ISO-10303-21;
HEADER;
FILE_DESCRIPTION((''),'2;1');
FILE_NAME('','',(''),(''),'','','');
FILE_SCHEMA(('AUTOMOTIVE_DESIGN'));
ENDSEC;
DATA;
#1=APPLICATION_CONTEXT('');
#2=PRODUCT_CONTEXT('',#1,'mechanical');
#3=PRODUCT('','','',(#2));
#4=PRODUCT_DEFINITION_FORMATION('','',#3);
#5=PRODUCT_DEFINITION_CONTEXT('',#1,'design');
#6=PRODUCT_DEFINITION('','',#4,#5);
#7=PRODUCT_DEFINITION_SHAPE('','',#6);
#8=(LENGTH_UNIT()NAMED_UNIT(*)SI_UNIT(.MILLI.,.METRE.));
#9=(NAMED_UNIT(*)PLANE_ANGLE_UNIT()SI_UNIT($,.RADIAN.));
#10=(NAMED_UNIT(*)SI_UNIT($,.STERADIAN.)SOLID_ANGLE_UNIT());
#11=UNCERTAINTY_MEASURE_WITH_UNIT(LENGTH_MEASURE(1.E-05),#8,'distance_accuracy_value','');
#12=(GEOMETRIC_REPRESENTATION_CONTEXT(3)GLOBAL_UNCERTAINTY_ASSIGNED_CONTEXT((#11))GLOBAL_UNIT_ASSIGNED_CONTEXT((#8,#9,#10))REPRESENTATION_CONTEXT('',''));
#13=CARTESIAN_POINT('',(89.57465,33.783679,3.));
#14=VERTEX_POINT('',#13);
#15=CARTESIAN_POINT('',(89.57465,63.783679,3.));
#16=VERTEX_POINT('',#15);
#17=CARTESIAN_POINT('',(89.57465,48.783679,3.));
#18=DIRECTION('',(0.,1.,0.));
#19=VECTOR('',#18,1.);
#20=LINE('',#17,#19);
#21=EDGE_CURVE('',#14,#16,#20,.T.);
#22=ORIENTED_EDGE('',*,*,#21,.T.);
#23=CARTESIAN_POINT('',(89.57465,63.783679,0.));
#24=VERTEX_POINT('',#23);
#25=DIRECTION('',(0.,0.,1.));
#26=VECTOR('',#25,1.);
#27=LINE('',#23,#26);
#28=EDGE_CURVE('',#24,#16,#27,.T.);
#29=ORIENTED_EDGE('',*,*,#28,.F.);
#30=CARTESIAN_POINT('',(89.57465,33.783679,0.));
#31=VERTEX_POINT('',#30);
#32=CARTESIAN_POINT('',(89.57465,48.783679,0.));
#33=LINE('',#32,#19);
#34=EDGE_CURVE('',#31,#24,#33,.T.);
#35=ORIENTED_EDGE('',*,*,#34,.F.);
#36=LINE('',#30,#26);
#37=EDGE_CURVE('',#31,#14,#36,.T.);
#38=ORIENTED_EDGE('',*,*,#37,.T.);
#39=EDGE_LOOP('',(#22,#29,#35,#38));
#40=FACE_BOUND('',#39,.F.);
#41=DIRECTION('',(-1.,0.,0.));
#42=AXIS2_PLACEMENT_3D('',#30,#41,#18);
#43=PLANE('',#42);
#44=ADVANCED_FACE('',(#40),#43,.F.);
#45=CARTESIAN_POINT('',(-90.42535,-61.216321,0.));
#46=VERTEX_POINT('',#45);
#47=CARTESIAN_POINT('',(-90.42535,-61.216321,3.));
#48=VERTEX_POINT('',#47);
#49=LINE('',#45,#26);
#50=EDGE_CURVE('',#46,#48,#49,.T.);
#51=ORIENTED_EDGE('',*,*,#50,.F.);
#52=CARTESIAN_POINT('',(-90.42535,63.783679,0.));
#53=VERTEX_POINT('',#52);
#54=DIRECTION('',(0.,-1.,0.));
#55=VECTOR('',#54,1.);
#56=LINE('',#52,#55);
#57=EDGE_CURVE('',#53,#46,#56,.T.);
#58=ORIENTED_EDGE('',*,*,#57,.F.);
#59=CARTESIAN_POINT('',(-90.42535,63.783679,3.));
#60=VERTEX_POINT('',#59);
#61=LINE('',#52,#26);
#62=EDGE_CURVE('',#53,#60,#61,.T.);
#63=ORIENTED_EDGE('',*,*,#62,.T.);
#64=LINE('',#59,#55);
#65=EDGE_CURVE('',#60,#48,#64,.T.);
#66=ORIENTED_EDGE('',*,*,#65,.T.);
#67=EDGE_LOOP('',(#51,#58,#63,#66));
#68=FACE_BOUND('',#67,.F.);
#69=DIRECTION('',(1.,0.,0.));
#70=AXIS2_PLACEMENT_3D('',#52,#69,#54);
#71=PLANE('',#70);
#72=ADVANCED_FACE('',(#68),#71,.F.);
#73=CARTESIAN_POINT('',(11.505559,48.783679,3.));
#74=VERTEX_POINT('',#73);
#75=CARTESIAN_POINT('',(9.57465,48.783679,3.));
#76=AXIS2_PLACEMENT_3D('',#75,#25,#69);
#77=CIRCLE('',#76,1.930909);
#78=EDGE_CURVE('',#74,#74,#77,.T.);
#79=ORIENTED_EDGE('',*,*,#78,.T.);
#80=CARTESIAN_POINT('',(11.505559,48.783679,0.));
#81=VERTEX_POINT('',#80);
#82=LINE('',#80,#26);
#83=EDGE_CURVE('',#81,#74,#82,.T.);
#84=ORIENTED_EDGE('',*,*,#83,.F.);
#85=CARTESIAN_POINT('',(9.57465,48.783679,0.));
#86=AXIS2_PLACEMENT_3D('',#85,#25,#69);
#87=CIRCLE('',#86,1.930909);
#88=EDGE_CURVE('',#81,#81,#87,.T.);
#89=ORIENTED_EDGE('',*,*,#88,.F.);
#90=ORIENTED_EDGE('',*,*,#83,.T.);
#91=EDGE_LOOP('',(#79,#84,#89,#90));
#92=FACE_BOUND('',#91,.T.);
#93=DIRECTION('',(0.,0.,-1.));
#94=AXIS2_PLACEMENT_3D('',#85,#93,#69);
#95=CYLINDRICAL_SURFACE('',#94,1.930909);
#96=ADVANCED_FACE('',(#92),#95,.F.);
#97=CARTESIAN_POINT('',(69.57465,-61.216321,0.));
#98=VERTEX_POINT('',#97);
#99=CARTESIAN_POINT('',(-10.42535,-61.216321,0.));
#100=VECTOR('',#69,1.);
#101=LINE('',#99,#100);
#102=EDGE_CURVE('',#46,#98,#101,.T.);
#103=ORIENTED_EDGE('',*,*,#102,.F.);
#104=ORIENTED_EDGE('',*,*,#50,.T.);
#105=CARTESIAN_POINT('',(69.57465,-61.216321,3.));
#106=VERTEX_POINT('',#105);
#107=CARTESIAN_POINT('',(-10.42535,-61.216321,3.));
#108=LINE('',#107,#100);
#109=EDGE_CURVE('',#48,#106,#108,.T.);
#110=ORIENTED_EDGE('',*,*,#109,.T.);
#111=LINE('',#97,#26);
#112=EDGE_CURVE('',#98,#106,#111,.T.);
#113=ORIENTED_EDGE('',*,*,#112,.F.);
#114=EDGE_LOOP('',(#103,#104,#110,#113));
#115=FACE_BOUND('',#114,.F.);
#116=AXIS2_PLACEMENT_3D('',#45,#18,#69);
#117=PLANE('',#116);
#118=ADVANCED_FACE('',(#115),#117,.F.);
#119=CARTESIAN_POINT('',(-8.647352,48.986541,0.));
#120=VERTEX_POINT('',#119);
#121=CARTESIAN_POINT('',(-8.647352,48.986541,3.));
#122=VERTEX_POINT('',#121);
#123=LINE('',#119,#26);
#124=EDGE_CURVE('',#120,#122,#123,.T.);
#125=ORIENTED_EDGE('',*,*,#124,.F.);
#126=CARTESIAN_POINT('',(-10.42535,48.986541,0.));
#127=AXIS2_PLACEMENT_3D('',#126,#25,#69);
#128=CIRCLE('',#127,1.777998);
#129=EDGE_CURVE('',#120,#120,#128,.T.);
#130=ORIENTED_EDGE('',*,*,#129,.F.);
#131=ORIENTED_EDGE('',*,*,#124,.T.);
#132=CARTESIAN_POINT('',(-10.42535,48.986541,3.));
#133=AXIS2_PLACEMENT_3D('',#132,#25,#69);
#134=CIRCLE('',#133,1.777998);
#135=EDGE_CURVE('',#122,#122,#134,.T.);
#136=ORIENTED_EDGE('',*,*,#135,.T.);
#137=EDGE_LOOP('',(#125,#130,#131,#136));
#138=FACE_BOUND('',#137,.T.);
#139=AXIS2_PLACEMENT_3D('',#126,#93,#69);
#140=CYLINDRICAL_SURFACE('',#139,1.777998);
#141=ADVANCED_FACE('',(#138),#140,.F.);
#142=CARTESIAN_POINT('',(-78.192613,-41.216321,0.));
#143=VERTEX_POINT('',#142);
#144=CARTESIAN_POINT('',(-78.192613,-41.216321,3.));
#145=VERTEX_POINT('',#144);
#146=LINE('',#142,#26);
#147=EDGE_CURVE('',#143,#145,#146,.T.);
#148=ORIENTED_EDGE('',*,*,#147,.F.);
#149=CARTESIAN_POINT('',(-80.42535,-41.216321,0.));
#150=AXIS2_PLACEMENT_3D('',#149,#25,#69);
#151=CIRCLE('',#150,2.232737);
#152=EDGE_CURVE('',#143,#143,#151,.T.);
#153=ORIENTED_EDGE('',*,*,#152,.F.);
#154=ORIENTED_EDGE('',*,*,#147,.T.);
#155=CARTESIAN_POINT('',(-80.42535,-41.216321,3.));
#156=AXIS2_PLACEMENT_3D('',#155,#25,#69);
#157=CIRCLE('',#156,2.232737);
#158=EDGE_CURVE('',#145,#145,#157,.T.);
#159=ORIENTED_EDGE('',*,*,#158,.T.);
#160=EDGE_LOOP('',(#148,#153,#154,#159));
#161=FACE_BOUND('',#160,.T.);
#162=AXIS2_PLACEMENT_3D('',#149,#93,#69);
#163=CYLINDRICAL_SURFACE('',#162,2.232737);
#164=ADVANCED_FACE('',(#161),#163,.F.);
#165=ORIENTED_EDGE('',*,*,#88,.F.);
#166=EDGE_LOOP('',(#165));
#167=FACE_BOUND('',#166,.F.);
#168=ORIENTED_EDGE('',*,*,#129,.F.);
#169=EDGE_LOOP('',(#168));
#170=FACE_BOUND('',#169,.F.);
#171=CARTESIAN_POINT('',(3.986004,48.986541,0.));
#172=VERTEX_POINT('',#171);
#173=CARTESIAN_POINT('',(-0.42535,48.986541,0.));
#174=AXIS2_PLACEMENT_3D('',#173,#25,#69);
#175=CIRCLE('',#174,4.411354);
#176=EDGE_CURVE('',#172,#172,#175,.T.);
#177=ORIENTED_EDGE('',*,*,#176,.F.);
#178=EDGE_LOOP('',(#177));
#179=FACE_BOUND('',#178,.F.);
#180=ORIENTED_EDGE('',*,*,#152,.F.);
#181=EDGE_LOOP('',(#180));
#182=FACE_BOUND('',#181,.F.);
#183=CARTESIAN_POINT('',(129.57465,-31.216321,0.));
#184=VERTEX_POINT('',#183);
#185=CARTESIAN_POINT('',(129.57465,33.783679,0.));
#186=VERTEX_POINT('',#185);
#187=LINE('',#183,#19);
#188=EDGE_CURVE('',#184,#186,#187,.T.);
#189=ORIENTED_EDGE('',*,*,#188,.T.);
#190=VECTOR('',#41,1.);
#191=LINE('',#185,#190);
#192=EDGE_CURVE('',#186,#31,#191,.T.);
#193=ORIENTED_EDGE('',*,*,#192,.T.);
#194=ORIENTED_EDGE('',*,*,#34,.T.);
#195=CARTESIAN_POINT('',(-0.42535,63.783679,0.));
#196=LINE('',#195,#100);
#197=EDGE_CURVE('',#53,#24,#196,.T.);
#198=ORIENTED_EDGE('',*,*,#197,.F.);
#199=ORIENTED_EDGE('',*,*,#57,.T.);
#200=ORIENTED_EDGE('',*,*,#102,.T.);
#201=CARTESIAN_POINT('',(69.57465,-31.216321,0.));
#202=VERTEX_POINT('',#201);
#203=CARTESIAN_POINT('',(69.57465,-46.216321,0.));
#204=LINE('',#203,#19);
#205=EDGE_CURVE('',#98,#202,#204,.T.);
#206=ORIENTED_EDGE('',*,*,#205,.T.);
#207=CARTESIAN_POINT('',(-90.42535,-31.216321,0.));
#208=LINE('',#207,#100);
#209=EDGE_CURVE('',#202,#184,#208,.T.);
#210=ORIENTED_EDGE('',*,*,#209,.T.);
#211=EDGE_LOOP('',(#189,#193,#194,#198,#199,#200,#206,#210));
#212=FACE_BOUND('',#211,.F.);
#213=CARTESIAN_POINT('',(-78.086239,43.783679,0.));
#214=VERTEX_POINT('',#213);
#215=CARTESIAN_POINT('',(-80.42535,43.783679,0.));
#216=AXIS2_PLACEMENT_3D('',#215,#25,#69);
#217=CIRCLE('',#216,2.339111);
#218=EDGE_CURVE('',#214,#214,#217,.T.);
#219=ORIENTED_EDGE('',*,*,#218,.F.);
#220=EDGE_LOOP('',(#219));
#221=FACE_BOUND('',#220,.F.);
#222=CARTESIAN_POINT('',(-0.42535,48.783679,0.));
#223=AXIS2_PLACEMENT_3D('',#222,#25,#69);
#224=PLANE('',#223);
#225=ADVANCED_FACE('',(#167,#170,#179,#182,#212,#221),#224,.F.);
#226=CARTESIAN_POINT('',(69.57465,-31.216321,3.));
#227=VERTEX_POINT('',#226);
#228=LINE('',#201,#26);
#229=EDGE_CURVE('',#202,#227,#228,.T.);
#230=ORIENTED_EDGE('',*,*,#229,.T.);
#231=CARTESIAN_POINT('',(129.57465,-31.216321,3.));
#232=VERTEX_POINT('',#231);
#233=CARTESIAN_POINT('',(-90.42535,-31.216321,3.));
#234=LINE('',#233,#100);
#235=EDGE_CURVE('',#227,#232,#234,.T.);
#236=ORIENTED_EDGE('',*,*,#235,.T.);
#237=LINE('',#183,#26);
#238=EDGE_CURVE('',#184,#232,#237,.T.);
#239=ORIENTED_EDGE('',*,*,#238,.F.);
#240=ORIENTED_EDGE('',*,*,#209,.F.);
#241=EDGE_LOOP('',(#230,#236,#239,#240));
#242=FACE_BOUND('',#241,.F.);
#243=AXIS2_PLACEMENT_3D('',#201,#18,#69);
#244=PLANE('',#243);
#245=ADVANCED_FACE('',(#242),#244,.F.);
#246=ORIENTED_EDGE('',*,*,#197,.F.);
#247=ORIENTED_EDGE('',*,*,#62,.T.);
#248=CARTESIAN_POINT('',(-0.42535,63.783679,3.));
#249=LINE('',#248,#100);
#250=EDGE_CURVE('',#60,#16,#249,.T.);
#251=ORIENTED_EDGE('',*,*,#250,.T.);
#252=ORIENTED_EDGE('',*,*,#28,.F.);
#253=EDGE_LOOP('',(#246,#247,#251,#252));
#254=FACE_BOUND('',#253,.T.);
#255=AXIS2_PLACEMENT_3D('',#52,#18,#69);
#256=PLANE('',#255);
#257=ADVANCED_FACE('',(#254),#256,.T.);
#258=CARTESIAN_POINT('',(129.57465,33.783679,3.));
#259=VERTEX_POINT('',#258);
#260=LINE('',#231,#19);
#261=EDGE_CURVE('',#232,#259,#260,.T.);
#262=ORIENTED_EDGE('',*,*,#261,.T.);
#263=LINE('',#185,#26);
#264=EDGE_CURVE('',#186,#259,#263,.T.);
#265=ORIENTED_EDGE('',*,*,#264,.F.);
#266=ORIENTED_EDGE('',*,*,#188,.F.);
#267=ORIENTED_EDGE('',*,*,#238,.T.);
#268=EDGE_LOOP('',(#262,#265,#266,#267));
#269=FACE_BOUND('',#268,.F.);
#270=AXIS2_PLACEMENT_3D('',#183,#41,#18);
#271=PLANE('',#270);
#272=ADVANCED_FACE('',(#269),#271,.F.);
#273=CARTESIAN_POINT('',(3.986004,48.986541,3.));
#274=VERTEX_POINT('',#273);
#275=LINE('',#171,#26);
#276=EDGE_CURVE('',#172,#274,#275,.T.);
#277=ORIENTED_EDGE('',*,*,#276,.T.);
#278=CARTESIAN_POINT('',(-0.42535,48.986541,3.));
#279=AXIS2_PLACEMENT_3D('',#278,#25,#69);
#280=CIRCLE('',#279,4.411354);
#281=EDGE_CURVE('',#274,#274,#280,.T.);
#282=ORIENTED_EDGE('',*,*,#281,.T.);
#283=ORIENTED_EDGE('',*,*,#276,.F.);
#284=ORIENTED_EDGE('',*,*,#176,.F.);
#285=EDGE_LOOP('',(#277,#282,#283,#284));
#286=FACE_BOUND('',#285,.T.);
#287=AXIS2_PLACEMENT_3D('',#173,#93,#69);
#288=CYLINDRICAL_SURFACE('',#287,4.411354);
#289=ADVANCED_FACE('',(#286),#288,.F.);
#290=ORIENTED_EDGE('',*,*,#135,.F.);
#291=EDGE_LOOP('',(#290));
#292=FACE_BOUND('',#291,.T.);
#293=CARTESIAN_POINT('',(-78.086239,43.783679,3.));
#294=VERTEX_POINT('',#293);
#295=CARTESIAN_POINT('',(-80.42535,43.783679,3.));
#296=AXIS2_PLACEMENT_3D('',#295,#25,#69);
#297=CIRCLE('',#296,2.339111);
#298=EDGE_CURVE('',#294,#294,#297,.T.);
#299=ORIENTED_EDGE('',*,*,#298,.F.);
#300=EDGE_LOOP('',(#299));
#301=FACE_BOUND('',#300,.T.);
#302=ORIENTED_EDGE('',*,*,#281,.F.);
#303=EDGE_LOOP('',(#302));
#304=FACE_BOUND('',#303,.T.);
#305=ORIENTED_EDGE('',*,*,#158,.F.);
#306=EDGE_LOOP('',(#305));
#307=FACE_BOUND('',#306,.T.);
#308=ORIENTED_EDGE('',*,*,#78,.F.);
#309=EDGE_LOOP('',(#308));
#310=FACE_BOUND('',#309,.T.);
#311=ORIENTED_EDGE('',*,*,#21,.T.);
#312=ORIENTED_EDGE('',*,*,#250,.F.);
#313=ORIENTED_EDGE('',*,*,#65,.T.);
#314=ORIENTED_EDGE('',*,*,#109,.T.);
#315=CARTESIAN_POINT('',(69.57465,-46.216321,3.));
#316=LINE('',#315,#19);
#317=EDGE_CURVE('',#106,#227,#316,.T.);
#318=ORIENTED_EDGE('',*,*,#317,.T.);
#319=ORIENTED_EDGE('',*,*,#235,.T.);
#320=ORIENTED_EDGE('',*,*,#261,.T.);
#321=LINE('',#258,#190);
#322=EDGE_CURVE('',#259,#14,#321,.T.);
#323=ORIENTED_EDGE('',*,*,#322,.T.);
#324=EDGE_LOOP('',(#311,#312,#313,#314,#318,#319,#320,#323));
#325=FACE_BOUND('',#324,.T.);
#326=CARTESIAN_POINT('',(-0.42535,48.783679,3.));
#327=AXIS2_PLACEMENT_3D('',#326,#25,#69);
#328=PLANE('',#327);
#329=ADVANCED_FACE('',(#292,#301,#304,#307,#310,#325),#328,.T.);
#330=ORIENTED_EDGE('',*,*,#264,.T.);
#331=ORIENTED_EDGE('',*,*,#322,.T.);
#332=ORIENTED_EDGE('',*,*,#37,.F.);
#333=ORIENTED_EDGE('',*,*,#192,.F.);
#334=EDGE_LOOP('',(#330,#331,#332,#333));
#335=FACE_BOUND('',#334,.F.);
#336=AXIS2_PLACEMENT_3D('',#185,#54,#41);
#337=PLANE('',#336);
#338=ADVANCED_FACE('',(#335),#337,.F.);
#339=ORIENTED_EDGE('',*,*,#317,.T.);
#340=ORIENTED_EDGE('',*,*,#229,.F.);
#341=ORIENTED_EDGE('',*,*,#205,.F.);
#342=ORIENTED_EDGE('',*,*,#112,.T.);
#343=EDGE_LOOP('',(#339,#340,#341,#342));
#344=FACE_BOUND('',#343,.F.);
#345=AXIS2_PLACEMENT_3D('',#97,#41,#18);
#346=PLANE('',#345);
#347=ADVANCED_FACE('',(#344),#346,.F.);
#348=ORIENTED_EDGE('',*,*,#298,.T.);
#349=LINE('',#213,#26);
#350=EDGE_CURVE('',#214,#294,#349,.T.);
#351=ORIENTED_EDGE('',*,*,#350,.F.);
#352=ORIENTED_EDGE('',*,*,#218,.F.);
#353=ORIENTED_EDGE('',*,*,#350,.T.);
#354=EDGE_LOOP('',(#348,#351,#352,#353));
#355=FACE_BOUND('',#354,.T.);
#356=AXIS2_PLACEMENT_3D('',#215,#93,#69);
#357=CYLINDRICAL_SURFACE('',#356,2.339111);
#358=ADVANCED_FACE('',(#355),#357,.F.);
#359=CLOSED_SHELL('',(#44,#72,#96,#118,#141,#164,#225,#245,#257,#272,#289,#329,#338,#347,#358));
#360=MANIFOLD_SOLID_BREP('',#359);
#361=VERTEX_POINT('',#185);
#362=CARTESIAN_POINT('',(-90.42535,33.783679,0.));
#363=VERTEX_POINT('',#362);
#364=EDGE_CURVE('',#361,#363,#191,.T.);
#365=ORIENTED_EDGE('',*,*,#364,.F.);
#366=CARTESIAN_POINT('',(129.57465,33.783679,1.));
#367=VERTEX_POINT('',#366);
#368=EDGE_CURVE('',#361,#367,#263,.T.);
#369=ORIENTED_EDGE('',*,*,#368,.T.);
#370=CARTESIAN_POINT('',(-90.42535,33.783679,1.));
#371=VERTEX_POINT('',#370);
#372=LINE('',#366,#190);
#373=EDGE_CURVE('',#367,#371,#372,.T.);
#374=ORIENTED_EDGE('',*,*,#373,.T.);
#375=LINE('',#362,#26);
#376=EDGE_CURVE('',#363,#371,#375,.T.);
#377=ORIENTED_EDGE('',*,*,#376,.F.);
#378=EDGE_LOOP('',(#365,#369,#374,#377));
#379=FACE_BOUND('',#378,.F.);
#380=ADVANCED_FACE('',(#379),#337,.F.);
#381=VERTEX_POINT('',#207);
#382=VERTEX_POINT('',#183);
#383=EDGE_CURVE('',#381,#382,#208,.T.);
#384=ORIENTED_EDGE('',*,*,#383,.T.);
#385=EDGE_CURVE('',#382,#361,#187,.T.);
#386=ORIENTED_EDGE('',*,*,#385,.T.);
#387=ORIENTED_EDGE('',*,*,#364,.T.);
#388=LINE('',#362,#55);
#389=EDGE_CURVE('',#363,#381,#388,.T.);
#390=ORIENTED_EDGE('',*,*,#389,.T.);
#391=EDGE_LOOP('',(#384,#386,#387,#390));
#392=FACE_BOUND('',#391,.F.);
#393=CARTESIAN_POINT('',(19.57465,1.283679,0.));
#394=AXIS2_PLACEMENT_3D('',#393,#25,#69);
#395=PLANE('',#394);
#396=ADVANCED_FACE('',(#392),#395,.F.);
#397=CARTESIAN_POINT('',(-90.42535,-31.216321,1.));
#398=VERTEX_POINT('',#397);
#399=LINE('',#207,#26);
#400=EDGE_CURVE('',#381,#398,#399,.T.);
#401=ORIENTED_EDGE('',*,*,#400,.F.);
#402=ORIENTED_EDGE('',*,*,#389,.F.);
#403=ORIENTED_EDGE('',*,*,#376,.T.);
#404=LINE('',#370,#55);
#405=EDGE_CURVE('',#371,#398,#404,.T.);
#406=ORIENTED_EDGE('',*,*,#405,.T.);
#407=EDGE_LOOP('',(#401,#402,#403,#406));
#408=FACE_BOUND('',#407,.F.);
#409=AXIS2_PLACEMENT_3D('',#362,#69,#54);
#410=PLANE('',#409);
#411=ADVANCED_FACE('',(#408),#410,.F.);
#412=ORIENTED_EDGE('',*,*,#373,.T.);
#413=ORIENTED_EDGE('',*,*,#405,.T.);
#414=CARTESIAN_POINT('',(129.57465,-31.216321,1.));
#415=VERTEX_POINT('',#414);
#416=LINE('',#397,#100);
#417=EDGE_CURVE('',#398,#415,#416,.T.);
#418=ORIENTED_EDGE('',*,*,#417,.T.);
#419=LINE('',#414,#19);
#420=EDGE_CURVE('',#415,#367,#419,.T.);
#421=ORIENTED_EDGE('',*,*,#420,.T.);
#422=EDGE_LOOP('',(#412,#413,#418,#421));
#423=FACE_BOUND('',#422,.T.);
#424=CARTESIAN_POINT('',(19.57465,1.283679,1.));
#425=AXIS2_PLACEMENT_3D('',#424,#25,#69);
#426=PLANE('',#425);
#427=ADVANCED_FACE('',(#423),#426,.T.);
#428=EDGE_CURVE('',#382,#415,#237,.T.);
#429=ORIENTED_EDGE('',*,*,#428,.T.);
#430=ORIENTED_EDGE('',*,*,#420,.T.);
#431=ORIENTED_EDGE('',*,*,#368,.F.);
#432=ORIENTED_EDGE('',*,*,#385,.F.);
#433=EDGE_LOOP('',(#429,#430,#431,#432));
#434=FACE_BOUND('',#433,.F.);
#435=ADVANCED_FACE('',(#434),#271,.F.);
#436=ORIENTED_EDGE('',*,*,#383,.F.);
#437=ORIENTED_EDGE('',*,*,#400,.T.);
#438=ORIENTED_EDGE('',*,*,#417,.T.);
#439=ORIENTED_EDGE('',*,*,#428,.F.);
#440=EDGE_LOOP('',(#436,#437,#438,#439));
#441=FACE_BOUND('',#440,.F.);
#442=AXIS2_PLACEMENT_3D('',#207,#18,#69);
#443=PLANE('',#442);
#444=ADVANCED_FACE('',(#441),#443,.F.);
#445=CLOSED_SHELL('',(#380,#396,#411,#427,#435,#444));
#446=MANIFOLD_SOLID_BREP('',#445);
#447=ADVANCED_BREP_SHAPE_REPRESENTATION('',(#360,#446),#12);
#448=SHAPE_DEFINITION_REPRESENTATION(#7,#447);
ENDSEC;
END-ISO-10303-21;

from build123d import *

# Parameters (mm, degrees)
F0_W     = 180
F0_H     = 30
F0_R     = 2.3391107882
F0_R_2   = 1.7779977582
F0_R_3   = 4.4113535935
F0_R_4   = 1.9309092274
F0_W_2   = 160
F0_R_5   = 2.2327370736
F1_DEPTH = 3
F2_DEPTH = 1


# Not quite as in the source:
# - a feature names something its author has since deleted; it is built from what else it names


with BuildPart() as f1:
    # F0 (on Top) → F1 (new body)
    with BuildSketch(Plane.XY):
        with Locations((-0.42535007, 48.7836791575)):
            Rectangle(F0_W, F0_H)
        with Locations((-80.42535007, 43.7836791575)):
            Circle(F0_R, mode=Mode.SUBTRACT)
        with Locations((-10.42535007, 48.9865408171)):
            Circle(F0_R_2, mode=Mode.SUBTRACT)
        with Locations((-0.42535007, 48.9865408171)):
            Circle(F0_R_3, mode=Mode.SUBTRACT)
        with Locations((9.57464993, 48.7836791575)):
            Circle(F0_R_4, mode=Mode.SUBTRACT)
        Polygon((89.57464993, 33.7836791575), (-90.42535007, 33.7836791575), (-90.42535007, -31.2163208425), (69.57464993, -31.2163208425), (129.57464993, -31.2163208425), (129.57464993, 33.7836791575), align=None)
        with Locations((-10.42535007, -46.2163208425)):
            Rectangle(F0_W_2, F0_H)
        with Locations((-80.42535007, -41.2163208425)):
            Circle(F0_R_5, mode=Mode.SUBTRACT)
    extrude(amount=F1_DEPTH)


with BuildPart() as f2:
    # F0 (on Top) → F2 (new body)
    with BuildSketch(Plane.XY):
        Polygon((89.57464993, 33.7836791575), (-90.42535007, 33.7836791575), (-90.42535007, -31.2163208425), (69.57464993, -31.2163208425), (129.57464993, -31.2163208425), (129.57464993, 33.7836791575), align=None)
    extrude(amount=F2_DEPTH)


solid = Compound([f1.part, f2.part])
